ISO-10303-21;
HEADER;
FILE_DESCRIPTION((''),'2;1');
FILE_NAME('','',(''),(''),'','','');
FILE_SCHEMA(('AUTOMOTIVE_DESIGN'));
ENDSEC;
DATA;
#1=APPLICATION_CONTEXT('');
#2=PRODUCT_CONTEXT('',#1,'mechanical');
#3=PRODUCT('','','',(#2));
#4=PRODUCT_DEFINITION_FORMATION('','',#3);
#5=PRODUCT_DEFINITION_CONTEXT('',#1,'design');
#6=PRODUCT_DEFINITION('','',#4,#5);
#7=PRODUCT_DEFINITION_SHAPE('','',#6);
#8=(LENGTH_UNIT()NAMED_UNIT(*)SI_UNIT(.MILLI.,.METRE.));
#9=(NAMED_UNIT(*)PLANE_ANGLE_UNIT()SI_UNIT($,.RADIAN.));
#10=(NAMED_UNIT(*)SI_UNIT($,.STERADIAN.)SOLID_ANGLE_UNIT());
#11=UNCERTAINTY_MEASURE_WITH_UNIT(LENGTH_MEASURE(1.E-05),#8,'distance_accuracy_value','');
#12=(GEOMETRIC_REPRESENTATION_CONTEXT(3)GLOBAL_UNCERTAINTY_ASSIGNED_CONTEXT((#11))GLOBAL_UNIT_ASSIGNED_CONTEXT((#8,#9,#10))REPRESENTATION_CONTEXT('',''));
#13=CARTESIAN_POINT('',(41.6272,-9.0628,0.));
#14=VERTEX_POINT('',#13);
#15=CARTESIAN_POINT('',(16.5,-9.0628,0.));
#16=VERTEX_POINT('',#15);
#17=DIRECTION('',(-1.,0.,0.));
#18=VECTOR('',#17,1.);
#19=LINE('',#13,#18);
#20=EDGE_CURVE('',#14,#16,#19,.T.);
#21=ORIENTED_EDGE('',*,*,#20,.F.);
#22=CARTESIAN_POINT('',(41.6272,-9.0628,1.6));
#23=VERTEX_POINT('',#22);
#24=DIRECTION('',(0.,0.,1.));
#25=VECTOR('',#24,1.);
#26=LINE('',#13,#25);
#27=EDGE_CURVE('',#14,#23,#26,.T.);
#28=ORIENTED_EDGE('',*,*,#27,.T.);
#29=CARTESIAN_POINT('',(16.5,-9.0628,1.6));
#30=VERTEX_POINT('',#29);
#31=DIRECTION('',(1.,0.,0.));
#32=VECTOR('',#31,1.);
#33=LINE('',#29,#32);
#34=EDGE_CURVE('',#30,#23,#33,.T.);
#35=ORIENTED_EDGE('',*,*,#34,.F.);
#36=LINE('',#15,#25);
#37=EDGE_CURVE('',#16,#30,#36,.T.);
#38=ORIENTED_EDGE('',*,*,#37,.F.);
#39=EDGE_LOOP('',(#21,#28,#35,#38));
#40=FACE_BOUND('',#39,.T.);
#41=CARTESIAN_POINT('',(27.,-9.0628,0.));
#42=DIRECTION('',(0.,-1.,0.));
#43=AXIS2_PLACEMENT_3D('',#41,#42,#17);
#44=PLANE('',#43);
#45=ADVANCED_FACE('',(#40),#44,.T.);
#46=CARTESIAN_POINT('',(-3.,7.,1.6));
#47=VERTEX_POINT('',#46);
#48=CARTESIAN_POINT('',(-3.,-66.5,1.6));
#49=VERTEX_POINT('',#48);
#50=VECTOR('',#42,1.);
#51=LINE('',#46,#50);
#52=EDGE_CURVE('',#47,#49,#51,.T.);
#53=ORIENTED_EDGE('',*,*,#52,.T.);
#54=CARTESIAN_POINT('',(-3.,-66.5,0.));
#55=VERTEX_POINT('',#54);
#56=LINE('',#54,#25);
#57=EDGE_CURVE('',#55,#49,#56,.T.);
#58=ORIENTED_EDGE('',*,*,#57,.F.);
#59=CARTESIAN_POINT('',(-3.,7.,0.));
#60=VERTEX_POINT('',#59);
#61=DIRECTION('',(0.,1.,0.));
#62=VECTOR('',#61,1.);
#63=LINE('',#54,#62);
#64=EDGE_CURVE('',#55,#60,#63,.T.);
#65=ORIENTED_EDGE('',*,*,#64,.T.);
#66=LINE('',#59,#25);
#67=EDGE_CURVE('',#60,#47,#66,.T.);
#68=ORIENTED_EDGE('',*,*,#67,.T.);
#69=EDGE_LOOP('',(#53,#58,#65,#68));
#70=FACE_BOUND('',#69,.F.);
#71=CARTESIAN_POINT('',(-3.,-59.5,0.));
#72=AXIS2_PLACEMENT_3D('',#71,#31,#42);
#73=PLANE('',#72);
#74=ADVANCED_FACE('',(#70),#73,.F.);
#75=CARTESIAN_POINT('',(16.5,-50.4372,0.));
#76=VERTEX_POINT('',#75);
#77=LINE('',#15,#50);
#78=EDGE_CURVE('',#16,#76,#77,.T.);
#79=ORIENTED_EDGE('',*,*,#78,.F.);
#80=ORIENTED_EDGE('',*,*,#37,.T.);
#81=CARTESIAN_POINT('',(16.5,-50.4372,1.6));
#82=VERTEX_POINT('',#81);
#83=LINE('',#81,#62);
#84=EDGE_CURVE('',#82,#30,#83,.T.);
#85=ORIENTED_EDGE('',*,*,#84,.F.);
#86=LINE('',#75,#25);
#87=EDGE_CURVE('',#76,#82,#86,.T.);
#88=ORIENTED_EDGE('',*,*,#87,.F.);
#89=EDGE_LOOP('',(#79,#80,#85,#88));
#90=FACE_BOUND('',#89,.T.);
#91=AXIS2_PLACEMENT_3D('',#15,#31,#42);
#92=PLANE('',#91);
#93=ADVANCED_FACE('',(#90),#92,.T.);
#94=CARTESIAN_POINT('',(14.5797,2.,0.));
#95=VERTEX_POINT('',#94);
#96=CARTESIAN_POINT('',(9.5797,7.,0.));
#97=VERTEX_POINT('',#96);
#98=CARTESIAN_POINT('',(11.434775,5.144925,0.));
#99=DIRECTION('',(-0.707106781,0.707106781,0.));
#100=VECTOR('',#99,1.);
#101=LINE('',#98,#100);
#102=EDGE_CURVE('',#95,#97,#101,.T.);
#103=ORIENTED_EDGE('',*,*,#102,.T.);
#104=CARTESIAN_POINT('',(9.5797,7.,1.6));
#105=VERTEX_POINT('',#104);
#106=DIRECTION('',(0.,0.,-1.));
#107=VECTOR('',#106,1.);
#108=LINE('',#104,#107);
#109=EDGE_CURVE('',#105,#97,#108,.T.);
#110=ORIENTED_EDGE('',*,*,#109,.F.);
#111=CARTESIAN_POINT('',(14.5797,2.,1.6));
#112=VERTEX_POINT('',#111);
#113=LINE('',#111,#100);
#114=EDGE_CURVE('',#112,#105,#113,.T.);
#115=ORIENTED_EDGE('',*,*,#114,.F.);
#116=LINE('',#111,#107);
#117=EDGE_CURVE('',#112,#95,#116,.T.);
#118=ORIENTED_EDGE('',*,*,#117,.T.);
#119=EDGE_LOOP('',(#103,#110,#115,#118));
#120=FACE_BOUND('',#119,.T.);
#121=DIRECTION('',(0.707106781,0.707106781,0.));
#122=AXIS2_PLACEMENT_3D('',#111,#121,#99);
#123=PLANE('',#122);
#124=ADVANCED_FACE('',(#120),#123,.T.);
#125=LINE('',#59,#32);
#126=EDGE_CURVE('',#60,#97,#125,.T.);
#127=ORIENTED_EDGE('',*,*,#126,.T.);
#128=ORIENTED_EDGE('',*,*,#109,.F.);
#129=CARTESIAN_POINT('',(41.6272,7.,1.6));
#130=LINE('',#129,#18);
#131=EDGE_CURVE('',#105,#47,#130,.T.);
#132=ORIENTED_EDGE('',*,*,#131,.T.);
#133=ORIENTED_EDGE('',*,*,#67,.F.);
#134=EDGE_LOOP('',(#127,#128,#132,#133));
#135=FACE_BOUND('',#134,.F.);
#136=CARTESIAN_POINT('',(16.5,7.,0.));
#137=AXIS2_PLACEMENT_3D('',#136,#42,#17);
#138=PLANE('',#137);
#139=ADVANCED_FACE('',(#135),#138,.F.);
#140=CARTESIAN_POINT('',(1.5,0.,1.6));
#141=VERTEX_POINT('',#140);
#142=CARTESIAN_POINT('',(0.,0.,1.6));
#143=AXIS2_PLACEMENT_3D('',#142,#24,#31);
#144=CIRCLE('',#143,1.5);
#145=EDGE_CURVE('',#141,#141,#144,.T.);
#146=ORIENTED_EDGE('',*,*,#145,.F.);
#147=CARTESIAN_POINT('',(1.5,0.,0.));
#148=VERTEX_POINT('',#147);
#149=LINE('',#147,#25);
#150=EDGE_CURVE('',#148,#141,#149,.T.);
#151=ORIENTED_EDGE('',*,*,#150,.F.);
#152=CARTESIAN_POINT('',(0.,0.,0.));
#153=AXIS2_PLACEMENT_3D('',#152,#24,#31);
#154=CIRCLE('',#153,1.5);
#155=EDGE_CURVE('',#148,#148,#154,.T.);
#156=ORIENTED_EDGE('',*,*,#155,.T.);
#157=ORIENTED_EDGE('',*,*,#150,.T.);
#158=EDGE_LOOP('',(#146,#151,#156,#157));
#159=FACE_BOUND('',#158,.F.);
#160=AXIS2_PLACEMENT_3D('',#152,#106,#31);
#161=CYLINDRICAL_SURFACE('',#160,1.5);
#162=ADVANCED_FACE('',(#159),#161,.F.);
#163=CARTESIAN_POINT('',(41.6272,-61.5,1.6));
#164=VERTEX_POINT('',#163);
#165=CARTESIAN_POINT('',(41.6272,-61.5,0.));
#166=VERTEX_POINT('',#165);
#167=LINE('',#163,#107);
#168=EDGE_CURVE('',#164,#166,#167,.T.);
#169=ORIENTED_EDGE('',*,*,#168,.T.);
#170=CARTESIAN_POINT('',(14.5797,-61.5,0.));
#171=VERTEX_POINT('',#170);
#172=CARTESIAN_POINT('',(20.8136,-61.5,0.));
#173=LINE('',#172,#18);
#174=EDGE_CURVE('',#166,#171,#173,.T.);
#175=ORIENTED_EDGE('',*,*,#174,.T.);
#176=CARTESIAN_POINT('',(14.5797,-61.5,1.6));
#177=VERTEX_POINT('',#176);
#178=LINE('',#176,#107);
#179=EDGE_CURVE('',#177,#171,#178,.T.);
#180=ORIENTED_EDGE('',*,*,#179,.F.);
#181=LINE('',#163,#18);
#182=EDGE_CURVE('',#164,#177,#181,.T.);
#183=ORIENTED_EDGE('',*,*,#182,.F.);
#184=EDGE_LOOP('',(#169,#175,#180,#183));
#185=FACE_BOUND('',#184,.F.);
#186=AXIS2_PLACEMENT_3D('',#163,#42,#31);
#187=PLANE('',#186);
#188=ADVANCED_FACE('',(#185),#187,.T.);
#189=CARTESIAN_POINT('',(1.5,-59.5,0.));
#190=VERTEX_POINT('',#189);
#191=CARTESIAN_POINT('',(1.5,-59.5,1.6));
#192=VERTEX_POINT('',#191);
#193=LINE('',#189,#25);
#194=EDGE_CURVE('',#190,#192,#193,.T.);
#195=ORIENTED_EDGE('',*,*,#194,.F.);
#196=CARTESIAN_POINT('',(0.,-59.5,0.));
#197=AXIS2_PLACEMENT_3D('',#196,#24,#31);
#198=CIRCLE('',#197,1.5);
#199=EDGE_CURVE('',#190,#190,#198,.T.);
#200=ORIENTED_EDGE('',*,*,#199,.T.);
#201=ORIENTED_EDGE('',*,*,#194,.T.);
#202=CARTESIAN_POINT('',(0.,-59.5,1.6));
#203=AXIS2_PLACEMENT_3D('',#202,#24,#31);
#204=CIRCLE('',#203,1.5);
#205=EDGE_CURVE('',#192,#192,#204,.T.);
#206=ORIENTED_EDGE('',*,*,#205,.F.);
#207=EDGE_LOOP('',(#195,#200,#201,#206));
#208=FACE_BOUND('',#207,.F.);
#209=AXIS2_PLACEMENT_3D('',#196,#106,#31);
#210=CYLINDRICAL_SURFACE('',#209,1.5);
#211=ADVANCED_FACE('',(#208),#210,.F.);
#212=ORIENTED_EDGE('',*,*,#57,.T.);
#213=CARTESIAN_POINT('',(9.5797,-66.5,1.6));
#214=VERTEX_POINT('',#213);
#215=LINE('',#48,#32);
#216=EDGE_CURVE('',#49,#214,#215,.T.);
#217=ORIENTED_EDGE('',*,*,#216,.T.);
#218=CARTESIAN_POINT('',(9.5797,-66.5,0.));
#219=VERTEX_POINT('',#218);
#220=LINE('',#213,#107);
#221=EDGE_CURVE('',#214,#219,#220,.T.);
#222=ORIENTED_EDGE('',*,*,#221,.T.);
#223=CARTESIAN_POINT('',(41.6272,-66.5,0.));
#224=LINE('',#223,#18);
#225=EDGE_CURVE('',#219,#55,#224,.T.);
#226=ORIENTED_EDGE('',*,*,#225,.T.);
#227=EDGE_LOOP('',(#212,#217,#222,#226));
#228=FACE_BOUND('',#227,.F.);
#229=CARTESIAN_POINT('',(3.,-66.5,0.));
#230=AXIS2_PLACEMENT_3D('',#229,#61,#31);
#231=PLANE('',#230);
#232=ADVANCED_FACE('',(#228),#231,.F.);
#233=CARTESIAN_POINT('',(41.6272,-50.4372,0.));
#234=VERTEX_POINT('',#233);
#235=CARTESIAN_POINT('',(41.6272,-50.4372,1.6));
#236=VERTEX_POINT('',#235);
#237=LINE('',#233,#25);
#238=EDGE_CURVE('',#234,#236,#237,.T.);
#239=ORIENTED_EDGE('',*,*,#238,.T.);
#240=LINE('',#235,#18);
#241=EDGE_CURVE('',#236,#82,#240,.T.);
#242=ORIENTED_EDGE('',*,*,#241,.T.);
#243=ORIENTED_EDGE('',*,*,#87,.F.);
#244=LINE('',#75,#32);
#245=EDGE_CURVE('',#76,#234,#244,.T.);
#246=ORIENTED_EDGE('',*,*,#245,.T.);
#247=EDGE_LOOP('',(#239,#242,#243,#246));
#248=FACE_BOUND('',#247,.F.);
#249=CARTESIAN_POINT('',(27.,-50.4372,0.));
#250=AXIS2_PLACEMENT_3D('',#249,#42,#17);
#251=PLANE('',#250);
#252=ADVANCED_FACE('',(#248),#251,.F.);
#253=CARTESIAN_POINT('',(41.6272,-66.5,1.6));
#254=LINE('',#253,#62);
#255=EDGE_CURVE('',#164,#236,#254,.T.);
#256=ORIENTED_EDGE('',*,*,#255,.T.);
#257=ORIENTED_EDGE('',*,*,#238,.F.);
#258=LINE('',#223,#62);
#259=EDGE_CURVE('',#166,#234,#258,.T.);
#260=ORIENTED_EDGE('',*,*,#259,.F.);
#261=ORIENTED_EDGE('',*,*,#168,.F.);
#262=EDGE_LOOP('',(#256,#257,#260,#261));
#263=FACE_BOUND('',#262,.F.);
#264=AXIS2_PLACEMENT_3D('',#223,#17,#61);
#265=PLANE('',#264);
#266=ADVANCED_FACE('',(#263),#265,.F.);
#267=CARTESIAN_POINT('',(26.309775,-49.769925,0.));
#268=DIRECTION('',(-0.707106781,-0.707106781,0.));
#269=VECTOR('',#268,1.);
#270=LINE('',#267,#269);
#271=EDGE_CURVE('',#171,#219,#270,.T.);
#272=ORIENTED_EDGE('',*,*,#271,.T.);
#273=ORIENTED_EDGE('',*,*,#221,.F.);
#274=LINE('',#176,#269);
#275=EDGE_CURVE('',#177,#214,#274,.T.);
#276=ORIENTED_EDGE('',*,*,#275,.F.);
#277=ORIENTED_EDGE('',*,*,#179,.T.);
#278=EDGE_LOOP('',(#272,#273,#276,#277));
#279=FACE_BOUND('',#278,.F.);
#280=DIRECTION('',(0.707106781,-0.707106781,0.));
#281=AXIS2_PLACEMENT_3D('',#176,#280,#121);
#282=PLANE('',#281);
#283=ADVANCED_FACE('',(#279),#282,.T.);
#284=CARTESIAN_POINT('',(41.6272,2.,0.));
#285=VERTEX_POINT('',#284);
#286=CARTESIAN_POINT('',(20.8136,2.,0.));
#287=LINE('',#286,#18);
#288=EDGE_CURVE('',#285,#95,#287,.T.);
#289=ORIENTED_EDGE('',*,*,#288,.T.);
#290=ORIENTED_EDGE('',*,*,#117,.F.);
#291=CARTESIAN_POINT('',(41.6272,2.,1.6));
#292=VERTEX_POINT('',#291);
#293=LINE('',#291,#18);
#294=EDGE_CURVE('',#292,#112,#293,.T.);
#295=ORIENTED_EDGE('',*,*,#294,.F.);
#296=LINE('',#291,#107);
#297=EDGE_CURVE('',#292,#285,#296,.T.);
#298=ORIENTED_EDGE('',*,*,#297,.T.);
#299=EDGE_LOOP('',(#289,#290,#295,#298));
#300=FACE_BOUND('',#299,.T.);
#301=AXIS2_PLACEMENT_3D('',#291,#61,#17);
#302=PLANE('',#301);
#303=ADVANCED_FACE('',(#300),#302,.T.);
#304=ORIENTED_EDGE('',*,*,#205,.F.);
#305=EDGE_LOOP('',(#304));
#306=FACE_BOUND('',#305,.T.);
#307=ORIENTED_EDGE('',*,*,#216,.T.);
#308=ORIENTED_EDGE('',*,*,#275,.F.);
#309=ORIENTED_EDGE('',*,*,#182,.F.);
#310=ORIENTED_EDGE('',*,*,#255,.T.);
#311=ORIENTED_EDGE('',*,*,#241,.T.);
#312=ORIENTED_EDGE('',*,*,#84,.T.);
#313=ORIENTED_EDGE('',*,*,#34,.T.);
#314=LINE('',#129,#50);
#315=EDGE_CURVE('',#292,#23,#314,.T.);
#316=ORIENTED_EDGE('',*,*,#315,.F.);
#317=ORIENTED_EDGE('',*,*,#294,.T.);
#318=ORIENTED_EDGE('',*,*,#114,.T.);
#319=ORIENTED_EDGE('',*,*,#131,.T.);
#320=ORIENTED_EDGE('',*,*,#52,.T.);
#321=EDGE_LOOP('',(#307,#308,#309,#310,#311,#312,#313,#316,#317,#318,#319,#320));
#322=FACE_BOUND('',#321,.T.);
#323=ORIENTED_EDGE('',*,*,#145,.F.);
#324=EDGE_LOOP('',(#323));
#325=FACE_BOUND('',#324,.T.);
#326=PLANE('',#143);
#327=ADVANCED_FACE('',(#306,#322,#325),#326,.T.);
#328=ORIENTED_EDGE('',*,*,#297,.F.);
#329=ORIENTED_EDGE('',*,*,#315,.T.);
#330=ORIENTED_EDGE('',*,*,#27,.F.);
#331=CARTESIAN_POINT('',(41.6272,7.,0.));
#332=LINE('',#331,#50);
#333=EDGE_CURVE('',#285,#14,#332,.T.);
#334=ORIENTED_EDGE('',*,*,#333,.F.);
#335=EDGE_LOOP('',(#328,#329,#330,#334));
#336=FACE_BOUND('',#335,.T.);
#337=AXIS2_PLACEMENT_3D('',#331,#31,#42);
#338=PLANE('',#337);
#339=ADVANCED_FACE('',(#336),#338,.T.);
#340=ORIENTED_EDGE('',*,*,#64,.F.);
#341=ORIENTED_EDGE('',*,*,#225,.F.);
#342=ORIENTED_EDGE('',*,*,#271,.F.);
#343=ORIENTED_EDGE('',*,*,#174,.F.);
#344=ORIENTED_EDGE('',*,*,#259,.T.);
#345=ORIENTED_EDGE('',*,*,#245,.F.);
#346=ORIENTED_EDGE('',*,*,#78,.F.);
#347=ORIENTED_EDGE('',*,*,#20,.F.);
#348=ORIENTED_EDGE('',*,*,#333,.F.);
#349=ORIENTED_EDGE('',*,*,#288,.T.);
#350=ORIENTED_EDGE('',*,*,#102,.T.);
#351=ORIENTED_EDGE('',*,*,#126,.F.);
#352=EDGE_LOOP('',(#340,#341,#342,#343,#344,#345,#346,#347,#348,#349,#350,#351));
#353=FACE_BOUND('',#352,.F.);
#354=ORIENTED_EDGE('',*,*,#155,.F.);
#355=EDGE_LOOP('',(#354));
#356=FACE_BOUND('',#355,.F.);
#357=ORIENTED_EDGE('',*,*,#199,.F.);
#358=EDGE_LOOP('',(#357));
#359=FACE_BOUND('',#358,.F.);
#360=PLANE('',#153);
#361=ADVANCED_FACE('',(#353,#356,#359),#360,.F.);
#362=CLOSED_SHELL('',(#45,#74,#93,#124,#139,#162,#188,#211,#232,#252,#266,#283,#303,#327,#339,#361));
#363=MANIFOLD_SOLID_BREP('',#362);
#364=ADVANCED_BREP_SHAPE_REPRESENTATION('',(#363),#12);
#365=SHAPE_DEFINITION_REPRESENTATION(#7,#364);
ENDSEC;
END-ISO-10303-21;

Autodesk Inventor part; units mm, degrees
ref_plane "YZ Plane" through (0, 0, 0) normal (1, 0, 0) x (0, 1, 0)
ref_plane "XZ Plane" through (0, 0, 0) normal (0, 1, 0) x (-1, 0, 0)
ref_plane "XY Plane" through (0, 0, 0) normal (0, 0, 1) x (1, 0, 0)
sketch "Skizze1" plane through (0, 0, 0) normal (0, 0, 1) x (1, 0, 0)
  arc A0 (3, 7) -> (-3, 1) centre (3, 1) ccw projected
  line L0 (16.5, 7) -> (3, 7) projected
  line L1 (16.5, 7) -> (40.4545, 7) projected
  line L2 (-3, 0) -> (-3, -59.5) projected
  line L3 (-3, 1) -> (-3, 0) projected
  arc A1 (-3, -60.5) -> (3, -66.5) centre (3, -60.5) ccw projected
  line L4 (-3, -59.5) -> (-3, -60.5) projected
  line L5 (3, -66.5) -> (16.5, -66.5) projected
  line L6 (16.5, -56.3086) -> (5, -56.3086) projected
  line L7 (27, -49) -> (27, -62.5) projected
  line L8 (27, -49) -> (16.5, -49) projected
  line L9 (16.5, -49) -> (16.5, -56.3086) projected
  line L10 (16.5, -56.3086) -> (5, -56.3086) projected
  line L11 (5, -56.3086) -> (5, -37.5) projected
  line L12 (5, -37.5) -> (3, -37.5) projected
  line L13 (3, -37.5) -> (3, -22) projected
  line L14 (3, -22) -> (5, -22) projected
  line L15 (5, -22) -> (5, -3.0505) projected
  line L16 (5, -3.0505) -> (16.5, -3.0505) projected
  line L17 (16.5, -3.0505) -> (16.5, -10.5) projected
  line L18 (27, -10.5) -> (16.5, -10.5) projected
  line L19 (27, 3) -> (27, -10.5) projected
  line L20 (27, 3) -> (16.5, 3) projected
  line L21 (16.5, 3) -> (16.5, 7) projected
  line L22 (16.5, 7) -> (3, 7) projected
  arc A2 (3, 7) -> (-3, 1) centre (3, 1) ccw projected
  line L23 (-3, 1) -> (-3, 0) projected
  circle A3 centre (0, 0) radius 3 projected
  line L24 (-3, 0) -> (-3, -59.5) projected
  circle A4 centre (0, -59.5) radius 3 projected
  line L25 (-3, -59.5) -> (-3, -60.5) projected
  arc A5 (-3, -60.5) -> (3, -66.5) centre (3, -60.5) ccw projected
  line L26 (3, -66.5) -> (16.5, -66.5) projected
  line L27 (16.5, -66.5) -> (16.5, -62.5) projected
  line L28 (16.5, -62.5) -> (27, -62.5) projected
  line L29 (-3, 7) -> (16.5, 7)
  line L30 (16.5, -66.5) -> (-3, -66.5)
  line L31 (-3, -66.5) -> (-3, 7)
  line L32 (16.5, 7) -> (41.6272, 7)
  line L33 (41.6272, 7) -> (41.6272, -9.0628)
  line L34 (41.6272, -9.0628) -> (16.5, -9.0628)
  line L35 (16.5, -66.5) -> (41.6272, -66.5)
  line L36 (41.6272, -66.5) -> (41.6272, -50.4372)
  line L37 (41.6272, -50.4372) -> (16.5, -50.4372)
  circle A6 centre (0, 0) radius 1.5 projected
  circle A7 centre (0, -59.5) radius 1.5 projected
  line L38 (16.5, -50.4372) -> (16.5, -9.0628)
  point P0 (0, 0)
  dimension "d5" = 7
  dimension "d6" = 7
extrude "Extrusion1" add sketch "Skizze1" along normal blind 1.6 contours A3 | A4 | L0 L21 L20 L19 L34 L17 L16 L15 L14 L13 L12 L11 L6 L9 L37 L7 L28 L27 L5 A1 L4 L2 L3 A0 | A0 L31 L29 | L1 L32 L33 L34 L19 L20 L21 | A1 L30 L31 | L17 L38 L9 L6 L11 L12 L13 L14 L15 L16 | L27 L28 L7 L37 L36 L35
sketch "Skizze2" plane through (0, 0, 1.6) normal (0, 0, 1) x (1, 0, 0)
  line L0 (-3, -66.5) -> (41.6272, -66.5) projected
  line L1 (41.6272, -9.0628) -> (41.6272, 7) projected
  line L2 (41.6272, 7) -> (-3, 7) projected
  line L3 (41.6272, 2) -> (14.5797, 2)
  line L4 (14.5797, 2) -> (9.5797, 7)
  line L5 (14.5797, 2) -> (21.6508, 2) construction
  dimension "d2" = 135
  dimension "d7" = 5
extrude "Extrusion2" cut sketch "Skizze2" against normal through all
ref_plane "Arbeitsebene1" through (-3, -29.75, 1.6) normal (0, 1, 0) x (1, 0, 0)
mirror "Spiegeln1" about plane through (-3, -29.75, 1.6) normal (0, 1, 0) of "Extrusion2"
properties part number "bottom_sensor"
